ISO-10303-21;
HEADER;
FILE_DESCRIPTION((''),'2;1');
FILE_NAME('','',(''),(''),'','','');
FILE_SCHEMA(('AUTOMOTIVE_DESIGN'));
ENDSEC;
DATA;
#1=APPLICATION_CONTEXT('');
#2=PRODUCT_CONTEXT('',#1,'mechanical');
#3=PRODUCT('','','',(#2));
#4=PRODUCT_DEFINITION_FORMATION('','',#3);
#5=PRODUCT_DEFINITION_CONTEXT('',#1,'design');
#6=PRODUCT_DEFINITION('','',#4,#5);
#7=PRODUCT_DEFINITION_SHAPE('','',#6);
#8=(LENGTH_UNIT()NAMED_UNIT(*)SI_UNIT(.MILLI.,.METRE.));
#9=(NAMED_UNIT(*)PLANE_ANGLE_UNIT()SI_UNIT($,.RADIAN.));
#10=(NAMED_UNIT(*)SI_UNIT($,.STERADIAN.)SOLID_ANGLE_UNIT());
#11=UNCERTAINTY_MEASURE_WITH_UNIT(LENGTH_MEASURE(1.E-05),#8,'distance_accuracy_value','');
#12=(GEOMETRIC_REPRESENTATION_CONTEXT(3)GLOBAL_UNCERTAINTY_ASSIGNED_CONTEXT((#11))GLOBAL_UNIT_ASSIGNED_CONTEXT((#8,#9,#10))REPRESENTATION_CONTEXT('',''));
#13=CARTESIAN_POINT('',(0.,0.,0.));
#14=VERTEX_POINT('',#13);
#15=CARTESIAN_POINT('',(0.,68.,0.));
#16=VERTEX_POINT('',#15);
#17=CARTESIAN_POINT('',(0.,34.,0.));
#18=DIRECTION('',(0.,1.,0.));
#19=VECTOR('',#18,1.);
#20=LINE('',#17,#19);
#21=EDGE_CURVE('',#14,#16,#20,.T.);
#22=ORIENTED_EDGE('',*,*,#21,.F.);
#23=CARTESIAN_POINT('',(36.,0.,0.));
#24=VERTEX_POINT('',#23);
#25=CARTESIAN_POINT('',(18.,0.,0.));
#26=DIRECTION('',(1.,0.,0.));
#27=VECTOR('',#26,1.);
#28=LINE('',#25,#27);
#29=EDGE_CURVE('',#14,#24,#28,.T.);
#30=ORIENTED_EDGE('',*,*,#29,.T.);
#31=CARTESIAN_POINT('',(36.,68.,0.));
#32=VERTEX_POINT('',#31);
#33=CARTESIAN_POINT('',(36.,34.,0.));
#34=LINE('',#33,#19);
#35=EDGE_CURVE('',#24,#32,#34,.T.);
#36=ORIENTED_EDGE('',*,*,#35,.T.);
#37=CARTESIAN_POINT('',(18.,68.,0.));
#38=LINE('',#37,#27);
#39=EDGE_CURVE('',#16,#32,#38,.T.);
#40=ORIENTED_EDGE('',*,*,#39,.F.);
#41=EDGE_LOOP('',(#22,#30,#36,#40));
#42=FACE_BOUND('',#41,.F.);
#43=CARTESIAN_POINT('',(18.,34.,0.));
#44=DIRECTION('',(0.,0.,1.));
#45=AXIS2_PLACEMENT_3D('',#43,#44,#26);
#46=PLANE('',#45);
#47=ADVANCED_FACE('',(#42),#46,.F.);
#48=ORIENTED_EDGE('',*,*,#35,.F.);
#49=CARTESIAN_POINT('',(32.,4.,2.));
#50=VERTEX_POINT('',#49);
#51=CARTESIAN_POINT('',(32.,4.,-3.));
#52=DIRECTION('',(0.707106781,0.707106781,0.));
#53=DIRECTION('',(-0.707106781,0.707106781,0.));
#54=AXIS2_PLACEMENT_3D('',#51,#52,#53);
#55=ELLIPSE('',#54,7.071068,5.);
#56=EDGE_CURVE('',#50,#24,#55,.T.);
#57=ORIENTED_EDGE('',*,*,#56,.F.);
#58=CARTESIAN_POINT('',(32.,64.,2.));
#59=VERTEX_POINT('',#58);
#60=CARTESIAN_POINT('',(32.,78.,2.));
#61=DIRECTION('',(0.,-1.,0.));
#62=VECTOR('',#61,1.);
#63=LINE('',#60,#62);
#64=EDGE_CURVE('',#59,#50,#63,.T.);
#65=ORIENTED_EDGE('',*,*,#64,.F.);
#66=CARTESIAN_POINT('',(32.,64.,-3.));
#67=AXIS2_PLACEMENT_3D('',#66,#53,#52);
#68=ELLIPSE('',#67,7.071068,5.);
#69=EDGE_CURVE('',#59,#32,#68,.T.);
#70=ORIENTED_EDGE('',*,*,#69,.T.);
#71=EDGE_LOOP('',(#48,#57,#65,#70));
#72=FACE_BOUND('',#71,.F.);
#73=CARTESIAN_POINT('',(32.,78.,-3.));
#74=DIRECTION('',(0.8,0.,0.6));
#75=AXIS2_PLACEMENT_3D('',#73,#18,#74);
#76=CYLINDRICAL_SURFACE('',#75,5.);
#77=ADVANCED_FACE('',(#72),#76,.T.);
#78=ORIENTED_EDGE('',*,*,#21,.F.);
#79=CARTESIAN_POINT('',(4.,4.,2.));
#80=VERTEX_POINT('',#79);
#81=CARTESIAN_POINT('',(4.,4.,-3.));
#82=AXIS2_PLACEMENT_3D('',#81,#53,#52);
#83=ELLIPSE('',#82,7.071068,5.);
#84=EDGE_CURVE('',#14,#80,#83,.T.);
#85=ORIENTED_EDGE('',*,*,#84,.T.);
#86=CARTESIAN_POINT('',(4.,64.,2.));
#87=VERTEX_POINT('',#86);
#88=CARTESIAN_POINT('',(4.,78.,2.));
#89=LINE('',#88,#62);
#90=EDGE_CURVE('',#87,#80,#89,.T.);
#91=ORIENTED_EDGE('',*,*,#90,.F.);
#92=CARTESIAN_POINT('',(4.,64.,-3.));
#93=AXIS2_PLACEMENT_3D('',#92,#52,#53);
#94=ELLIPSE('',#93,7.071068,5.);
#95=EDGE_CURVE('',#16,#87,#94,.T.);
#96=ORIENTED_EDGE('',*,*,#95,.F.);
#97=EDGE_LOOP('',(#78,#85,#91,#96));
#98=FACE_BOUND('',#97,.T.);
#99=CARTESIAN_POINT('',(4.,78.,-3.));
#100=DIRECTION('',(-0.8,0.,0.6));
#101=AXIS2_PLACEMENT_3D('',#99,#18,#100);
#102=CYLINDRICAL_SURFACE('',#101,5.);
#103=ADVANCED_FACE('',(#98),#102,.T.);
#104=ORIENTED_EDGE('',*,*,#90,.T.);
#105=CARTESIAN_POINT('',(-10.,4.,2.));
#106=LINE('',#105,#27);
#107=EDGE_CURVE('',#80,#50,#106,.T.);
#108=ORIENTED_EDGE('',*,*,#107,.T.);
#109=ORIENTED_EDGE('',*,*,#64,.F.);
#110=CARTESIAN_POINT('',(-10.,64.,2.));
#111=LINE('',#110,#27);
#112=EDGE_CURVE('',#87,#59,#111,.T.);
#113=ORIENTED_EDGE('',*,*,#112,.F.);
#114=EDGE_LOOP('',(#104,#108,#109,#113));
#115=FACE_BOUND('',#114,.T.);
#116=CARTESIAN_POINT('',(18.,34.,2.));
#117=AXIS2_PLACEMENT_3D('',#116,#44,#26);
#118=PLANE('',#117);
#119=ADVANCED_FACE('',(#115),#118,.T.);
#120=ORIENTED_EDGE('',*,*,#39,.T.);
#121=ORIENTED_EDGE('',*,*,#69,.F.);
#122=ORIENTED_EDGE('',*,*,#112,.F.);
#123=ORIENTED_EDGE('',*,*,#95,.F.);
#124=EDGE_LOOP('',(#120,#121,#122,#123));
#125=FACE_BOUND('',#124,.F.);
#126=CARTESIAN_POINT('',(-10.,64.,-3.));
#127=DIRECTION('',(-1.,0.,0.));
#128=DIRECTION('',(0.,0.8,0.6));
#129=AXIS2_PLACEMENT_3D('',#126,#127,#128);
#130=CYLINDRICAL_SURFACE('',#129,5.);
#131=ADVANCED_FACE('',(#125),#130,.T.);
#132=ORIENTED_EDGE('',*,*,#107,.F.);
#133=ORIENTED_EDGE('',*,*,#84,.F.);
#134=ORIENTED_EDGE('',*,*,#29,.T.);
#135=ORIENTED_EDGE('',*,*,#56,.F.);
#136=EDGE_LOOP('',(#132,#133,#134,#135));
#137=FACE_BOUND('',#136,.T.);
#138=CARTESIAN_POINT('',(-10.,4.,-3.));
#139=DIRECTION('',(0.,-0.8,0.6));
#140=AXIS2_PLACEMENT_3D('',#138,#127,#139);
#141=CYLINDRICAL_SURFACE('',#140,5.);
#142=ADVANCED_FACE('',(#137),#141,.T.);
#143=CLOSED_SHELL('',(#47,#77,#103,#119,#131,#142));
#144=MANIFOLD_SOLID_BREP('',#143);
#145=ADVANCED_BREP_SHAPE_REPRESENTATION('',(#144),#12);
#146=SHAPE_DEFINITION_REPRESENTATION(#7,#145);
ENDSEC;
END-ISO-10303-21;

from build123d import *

# Parameters (mm, degrees)
F0_W        = 36
F0_H        = 68
F1_DEPTH    = 2
F2_T1_DEPTH = 88
F2_T3_DEPTH = 56


# Not quite as in the source:
# - a fillet or chamfer that OpenCascade refuses, or shapes differently, is made with other operations: its cross-section is extruded or revolved along the edge and cut away or added


with BuildPart() as f1:
    # F0 (on Top) → F1 (new body)
    with BuildSketch(Plane.XY):
        with Locations((18, 34)):
            Rectangle(F0_W, F0_H)
    extrude(amount=F1_DEPTH)

    # F2: fillet of radius 5 on 4 edges, made by hand

    # F2_s2 → F2_t1 (cut)
    with BuildSketch(Plane.XZ.offset(-78)):
        with BuildLine():
            ThreePointArc((36, 0), (34.2360679775, 1.472135955), (32, 2))
            Line((32, 2), (36, 2))
            Line((36, 2), (36, 0))
        make_face()
        with BuildLine():
            ThreePointArc((0, 0), (1.7639320225, 1.472135955), (4, 2))
            Line((4, 2), (0, 2))
            Line((0, 2), (0, 0))
        make_face()
    extrude(amount=F2_T1_DEPTH, mode=Mode.SUBTRACT)

    # F2_s4 → F2_t3 (cut)
    with BuildSketch(Plane.YZ.offset(-10)):
        with BuildLine():
            ThreePointArc((0, 0), (1.7639320225, 1.472135955), (4, 2))
            Line((4, 2), (0, 2))
            Line((0, 2), (0, 0))
        make_face()
        with BuildLine():
            ThreePointArc((68, 0), (66.2360679775, 1.472135955), (64, 2))
            Line((64, 2), (68, 2))
            Line((68, 2), (68, 0))
        make_face()
    extrude(amount=F2_T3_DEPTH, mode=Mode.SUBTRACT)


solid = f1.part
